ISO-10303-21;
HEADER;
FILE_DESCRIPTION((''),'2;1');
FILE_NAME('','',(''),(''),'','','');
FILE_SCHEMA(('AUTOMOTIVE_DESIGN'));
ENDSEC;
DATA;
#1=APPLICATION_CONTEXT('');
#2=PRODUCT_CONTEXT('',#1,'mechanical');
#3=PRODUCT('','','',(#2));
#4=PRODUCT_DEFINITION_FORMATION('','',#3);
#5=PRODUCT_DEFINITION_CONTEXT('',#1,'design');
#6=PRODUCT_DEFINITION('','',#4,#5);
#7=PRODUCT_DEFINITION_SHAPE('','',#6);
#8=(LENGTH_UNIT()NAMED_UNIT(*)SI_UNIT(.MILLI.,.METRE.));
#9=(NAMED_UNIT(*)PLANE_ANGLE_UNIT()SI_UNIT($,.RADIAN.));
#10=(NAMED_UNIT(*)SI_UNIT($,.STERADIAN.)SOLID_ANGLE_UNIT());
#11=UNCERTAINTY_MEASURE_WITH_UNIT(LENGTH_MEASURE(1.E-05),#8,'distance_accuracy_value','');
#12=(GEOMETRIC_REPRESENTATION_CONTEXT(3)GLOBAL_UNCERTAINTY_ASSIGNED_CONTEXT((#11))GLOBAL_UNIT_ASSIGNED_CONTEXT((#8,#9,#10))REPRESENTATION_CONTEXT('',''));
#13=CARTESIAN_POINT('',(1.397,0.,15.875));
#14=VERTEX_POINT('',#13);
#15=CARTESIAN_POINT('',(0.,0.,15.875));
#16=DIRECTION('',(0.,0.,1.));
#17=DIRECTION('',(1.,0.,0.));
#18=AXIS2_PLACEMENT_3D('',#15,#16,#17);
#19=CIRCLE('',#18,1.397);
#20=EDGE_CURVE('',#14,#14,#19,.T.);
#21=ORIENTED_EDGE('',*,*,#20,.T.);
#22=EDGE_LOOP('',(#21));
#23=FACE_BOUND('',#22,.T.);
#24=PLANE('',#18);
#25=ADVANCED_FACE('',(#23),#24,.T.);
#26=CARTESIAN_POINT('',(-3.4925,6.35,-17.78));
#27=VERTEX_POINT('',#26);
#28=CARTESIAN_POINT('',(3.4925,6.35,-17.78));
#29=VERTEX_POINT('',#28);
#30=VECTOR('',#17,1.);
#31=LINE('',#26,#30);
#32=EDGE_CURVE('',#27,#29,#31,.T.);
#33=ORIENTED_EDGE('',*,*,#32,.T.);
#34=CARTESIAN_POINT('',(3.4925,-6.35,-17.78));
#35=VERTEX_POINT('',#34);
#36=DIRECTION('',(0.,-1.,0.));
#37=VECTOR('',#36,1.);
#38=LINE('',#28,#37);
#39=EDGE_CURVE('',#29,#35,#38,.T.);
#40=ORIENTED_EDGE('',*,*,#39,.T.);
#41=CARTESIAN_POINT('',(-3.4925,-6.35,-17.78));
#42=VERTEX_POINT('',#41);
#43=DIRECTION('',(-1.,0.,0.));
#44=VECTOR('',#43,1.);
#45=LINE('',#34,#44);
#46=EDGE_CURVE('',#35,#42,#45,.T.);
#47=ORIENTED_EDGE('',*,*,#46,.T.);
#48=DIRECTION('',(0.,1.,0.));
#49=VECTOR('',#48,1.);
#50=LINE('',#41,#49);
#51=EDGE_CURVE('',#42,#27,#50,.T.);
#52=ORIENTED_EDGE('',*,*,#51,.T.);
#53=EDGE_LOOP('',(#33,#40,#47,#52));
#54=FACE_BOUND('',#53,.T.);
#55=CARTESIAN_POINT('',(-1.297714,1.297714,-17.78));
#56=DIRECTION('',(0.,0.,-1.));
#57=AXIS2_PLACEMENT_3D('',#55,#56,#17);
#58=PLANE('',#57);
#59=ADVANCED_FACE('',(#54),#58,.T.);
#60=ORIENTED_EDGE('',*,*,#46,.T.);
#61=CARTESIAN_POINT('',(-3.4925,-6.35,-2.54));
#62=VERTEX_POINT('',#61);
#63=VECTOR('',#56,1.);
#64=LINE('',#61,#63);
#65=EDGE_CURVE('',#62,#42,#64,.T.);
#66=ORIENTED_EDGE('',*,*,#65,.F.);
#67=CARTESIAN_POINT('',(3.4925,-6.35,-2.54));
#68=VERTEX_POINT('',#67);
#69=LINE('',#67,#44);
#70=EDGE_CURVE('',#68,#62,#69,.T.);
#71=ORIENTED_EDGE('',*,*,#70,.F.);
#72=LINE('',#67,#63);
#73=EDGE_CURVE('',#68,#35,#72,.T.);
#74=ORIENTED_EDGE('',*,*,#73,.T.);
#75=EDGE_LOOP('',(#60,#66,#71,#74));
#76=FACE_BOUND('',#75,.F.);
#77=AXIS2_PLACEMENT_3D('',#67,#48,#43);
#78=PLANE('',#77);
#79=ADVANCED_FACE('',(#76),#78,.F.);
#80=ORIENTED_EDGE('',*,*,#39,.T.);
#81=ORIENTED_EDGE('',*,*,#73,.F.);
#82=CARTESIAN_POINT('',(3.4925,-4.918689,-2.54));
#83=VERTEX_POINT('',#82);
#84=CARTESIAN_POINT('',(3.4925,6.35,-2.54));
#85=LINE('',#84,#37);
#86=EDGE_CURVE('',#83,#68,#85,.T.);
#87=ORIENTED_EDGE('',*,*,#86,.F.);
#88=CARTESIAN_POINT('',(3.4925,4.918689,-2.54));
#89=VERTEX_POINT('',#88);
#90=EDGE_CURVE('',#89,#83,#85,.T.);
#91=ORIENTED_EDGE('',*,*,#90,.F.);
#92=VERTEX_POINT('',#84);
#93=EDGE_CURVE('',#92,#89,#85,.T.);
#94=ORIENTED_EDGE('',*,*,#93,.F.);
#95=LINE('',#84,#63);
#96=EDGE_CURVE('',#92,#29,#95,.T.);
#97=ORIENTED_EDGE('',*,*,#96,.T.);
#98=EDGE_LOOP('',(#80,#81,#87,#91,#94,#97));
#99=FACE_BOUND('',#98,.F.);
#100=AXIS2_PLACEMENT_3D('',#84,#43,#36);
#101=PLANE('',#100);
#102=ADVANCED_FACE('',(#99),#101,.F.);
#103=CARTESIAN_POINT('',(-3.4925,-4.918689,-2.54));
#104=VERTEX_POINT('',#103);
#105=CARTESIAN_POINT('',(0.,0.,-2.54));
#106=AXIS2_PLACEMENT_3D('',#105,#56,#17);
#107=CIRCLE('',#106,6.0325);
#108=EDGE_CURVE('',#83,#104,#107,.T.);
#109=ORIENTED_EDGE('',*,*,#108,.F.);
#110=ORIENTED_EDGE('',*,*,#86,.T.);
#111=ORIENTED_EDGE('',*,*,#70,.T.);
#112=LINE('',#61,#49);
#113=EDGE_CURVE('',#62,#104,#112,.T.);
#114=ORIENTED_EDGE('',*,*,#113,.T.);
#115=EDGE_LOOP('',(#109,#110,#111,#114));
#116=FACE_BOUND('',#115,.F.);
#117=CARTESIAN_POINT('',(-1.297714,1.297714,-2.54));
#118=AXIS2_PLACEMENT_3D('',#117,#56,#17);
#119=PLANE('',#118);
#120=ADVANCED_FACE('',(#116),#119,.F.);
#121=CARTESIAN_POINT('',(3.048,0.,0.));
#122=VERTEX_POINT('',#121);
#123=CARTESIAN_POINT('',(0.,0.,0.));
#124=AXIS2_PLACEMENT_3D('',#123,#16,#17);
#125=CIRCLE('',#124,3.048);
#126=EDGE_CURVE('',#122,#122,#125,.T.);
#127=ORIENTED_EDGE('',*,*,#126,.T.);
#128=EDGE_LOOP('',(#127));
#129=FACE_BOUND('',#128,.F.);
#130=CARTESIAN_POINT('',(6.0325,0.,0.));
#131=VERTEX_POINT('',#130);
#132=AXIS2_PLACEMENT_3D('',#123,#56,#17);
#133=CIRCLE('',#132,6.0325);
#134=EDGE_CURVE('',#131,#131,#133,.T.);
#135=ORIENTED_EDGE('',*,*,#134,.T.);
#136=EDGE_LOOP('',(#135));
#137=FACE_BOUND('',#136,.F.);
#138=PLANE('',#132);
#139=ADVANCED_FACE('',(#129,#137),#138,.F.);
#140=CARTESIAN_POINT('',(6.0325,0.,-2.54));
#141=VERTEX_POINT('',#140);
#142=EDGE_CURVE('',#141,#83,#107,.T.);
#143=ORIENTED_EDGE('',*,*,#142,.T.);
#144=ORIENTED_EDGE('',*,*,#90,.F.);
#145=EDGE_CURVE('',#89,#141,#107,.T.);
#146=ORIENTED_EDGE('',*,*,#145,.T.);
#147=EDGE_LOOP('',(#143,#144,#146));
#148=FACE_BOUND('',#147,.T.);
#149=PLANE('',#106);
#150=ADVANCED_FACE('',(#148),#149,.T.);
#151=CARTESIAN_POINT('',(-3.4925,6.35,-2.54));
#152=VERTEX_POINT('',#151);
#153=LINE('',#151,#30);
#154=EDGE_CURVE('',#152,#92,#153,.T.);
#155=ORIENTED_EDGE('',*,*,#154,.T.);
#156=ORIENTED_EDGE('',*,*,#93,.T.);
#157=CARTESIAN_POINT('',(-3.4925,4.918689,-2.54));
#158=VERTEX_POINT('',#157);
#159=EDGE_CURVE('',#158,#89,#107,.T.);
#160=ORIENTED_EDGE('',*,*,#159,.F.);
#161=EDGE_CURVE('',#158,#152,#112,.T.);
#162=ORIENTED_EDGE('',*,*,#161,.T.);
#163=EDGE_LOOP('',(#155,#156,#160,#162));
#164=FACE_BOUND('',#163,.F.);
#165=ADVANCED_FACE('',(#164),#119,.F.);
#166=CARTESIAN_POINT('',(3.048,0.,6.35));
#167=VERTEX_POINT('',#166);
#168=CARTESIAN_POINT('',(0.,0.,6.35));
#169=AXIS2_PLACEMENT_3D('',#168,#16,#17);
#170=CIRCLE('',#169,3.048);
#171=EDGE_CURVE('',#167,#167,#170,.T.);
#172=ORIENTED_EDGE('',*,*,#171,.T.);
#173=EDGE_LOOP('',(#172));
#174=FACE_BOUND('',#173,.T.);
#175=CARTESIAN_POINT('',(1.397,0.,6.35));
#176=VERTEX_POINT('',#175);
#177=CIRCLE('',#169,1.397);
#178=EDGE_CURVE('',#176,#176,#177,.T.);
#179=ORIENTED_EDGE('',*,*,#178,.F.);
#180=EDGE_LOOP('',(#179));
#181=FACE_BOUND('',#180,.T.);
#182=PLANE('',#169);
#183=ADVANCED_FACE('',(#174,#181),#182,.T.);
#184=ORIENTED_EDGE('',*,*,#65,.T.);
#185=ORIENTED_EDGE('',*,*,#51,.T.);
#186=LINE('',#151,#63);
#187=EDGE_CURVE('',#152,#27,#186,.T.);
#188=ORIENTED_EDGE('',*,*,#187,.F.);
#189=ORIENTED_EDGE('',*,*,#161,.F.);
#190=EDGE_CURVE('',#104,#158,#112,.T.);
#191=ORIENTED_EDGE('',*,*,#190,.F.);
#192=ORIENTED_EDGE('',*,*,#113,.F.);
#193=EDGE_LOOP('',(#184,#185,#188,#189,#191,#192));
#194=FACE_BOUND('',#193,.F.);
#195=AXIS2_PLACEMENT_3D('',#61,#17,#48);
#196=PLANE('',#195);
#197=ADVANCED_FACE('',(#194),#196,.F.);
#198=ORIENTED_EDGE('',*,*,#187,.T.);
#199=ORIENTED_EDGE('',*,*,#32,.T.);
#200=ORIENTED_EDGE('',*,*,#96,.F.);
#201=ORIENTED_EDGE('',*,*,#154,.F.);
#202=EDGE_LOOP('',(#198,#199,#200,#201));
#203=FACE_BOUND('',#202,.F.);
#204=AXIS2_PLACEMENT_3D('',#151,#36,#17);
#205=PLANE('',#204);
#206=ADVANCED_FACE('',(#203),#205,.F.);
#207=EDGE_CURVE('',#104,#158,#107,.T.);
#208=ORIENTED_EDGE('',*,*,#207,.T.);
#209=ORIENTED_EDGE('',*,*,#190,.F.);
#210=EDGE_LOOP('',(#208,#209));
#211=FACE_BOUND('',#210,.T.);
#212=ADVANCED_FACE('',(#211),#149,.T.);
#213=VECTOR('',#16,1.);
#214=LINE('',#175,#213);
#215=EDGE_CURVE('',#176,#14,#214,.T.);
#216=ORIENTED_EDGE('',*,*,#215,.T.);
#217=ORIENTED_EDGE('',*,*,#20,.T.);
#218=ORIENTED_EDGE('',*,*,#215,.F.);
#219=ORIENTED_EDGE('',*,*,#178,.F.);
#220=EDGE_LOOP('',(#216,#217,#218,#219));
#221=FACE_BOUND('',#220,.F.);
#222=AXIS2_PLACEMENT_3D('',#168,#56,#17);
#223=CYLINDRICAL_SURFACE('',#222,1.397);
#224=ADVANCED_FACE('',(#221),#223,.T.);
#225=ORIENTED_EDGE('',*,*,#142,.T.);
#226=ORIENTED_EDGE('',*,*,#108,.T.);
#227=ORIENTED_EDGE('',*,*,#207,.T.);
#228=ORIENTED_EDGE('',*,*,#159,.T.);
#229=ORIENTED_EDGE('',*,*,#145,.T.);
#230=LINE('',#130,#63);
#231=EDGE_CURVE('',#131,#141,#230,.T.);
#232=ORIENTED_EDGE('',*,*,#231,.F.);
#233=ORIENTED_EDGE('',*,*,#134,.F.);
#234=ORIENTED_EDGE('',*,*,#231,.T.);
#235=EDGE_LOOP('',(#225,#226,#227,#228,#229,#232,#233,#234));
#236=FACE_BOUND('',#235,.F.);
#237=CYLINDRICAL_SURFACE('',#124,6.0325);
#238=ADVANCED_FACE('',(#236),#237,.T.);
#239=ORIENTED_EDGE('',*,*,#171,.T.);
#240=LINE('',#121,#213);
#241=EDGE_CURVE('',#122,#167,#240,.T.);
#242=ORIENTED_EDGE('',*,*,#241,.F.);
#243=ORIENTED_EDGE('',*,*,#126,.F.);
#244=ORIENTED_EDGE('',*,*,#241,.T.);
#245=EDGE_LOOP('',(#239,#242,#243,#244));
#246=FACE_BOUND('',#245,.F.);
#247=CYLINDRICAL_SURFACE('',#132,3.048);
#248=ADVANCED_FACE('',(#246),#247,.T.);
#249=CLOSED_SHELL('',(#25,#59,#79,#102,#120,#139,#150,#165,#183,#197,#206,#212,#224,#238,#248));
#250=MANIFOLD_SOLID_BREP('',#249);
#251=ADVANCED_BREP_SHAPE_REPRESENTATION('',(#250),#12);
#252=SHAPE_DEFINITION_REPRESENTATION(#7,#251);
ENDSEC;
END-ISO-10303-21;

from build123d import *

# Parameters (mm, degrees)
F0_R     = 3.048
F1_DEPTH = 6.35
F2_R     = 6.0325
F2_R_2   = 3.048
F3_DEPTH = 2.54
F5_DEPTH = 15.24
F6_R     = 1.397
F7_DEPTH = 9.525


with BuildPart() as f1:
    # F0 (on Top) → F1 (new body)
    with BuildSketch(Plane.XY):
        Circle(F0_R)
    extrude(amount=F1_DEPTH)

    # F2 (on face) → F3 (join)
    with BuildSketch(Plane(origin=(0, 0, 0), x_dir=(1, 0, 0), z_dir=(0, 0, -1))):
        Circle(F2_R)
        Circle(F2_R_2, mode=Mode.SUBTRACT)
        Circle(F2_R_2)
    extrude(amount=F3_DEPTH)

    # F4 (on face) → F5 (join)
    with BuildSketch(Plane(origin=(0, 0, -2.54), x_dir=(1, 0, 0), z_dir=(0, 0, -1))):
        Polygon((3.4925, -6.35), (-3.4925, 6.35), (-3.4925, -6.35), align=None)
        Polygon((3.4925, 6.35), (-3.4925, 6.35), (3.4925, -6.35), align=None)
    extrude(amount=F5_DEPTH)

    # F6 (on face) → F7 (join)
    with BuildSketch(Plane.XY.offset(6.35)):
        Circle(F6_R)
    extrude(amount=F7_DEPTH)


solid = f1.part
